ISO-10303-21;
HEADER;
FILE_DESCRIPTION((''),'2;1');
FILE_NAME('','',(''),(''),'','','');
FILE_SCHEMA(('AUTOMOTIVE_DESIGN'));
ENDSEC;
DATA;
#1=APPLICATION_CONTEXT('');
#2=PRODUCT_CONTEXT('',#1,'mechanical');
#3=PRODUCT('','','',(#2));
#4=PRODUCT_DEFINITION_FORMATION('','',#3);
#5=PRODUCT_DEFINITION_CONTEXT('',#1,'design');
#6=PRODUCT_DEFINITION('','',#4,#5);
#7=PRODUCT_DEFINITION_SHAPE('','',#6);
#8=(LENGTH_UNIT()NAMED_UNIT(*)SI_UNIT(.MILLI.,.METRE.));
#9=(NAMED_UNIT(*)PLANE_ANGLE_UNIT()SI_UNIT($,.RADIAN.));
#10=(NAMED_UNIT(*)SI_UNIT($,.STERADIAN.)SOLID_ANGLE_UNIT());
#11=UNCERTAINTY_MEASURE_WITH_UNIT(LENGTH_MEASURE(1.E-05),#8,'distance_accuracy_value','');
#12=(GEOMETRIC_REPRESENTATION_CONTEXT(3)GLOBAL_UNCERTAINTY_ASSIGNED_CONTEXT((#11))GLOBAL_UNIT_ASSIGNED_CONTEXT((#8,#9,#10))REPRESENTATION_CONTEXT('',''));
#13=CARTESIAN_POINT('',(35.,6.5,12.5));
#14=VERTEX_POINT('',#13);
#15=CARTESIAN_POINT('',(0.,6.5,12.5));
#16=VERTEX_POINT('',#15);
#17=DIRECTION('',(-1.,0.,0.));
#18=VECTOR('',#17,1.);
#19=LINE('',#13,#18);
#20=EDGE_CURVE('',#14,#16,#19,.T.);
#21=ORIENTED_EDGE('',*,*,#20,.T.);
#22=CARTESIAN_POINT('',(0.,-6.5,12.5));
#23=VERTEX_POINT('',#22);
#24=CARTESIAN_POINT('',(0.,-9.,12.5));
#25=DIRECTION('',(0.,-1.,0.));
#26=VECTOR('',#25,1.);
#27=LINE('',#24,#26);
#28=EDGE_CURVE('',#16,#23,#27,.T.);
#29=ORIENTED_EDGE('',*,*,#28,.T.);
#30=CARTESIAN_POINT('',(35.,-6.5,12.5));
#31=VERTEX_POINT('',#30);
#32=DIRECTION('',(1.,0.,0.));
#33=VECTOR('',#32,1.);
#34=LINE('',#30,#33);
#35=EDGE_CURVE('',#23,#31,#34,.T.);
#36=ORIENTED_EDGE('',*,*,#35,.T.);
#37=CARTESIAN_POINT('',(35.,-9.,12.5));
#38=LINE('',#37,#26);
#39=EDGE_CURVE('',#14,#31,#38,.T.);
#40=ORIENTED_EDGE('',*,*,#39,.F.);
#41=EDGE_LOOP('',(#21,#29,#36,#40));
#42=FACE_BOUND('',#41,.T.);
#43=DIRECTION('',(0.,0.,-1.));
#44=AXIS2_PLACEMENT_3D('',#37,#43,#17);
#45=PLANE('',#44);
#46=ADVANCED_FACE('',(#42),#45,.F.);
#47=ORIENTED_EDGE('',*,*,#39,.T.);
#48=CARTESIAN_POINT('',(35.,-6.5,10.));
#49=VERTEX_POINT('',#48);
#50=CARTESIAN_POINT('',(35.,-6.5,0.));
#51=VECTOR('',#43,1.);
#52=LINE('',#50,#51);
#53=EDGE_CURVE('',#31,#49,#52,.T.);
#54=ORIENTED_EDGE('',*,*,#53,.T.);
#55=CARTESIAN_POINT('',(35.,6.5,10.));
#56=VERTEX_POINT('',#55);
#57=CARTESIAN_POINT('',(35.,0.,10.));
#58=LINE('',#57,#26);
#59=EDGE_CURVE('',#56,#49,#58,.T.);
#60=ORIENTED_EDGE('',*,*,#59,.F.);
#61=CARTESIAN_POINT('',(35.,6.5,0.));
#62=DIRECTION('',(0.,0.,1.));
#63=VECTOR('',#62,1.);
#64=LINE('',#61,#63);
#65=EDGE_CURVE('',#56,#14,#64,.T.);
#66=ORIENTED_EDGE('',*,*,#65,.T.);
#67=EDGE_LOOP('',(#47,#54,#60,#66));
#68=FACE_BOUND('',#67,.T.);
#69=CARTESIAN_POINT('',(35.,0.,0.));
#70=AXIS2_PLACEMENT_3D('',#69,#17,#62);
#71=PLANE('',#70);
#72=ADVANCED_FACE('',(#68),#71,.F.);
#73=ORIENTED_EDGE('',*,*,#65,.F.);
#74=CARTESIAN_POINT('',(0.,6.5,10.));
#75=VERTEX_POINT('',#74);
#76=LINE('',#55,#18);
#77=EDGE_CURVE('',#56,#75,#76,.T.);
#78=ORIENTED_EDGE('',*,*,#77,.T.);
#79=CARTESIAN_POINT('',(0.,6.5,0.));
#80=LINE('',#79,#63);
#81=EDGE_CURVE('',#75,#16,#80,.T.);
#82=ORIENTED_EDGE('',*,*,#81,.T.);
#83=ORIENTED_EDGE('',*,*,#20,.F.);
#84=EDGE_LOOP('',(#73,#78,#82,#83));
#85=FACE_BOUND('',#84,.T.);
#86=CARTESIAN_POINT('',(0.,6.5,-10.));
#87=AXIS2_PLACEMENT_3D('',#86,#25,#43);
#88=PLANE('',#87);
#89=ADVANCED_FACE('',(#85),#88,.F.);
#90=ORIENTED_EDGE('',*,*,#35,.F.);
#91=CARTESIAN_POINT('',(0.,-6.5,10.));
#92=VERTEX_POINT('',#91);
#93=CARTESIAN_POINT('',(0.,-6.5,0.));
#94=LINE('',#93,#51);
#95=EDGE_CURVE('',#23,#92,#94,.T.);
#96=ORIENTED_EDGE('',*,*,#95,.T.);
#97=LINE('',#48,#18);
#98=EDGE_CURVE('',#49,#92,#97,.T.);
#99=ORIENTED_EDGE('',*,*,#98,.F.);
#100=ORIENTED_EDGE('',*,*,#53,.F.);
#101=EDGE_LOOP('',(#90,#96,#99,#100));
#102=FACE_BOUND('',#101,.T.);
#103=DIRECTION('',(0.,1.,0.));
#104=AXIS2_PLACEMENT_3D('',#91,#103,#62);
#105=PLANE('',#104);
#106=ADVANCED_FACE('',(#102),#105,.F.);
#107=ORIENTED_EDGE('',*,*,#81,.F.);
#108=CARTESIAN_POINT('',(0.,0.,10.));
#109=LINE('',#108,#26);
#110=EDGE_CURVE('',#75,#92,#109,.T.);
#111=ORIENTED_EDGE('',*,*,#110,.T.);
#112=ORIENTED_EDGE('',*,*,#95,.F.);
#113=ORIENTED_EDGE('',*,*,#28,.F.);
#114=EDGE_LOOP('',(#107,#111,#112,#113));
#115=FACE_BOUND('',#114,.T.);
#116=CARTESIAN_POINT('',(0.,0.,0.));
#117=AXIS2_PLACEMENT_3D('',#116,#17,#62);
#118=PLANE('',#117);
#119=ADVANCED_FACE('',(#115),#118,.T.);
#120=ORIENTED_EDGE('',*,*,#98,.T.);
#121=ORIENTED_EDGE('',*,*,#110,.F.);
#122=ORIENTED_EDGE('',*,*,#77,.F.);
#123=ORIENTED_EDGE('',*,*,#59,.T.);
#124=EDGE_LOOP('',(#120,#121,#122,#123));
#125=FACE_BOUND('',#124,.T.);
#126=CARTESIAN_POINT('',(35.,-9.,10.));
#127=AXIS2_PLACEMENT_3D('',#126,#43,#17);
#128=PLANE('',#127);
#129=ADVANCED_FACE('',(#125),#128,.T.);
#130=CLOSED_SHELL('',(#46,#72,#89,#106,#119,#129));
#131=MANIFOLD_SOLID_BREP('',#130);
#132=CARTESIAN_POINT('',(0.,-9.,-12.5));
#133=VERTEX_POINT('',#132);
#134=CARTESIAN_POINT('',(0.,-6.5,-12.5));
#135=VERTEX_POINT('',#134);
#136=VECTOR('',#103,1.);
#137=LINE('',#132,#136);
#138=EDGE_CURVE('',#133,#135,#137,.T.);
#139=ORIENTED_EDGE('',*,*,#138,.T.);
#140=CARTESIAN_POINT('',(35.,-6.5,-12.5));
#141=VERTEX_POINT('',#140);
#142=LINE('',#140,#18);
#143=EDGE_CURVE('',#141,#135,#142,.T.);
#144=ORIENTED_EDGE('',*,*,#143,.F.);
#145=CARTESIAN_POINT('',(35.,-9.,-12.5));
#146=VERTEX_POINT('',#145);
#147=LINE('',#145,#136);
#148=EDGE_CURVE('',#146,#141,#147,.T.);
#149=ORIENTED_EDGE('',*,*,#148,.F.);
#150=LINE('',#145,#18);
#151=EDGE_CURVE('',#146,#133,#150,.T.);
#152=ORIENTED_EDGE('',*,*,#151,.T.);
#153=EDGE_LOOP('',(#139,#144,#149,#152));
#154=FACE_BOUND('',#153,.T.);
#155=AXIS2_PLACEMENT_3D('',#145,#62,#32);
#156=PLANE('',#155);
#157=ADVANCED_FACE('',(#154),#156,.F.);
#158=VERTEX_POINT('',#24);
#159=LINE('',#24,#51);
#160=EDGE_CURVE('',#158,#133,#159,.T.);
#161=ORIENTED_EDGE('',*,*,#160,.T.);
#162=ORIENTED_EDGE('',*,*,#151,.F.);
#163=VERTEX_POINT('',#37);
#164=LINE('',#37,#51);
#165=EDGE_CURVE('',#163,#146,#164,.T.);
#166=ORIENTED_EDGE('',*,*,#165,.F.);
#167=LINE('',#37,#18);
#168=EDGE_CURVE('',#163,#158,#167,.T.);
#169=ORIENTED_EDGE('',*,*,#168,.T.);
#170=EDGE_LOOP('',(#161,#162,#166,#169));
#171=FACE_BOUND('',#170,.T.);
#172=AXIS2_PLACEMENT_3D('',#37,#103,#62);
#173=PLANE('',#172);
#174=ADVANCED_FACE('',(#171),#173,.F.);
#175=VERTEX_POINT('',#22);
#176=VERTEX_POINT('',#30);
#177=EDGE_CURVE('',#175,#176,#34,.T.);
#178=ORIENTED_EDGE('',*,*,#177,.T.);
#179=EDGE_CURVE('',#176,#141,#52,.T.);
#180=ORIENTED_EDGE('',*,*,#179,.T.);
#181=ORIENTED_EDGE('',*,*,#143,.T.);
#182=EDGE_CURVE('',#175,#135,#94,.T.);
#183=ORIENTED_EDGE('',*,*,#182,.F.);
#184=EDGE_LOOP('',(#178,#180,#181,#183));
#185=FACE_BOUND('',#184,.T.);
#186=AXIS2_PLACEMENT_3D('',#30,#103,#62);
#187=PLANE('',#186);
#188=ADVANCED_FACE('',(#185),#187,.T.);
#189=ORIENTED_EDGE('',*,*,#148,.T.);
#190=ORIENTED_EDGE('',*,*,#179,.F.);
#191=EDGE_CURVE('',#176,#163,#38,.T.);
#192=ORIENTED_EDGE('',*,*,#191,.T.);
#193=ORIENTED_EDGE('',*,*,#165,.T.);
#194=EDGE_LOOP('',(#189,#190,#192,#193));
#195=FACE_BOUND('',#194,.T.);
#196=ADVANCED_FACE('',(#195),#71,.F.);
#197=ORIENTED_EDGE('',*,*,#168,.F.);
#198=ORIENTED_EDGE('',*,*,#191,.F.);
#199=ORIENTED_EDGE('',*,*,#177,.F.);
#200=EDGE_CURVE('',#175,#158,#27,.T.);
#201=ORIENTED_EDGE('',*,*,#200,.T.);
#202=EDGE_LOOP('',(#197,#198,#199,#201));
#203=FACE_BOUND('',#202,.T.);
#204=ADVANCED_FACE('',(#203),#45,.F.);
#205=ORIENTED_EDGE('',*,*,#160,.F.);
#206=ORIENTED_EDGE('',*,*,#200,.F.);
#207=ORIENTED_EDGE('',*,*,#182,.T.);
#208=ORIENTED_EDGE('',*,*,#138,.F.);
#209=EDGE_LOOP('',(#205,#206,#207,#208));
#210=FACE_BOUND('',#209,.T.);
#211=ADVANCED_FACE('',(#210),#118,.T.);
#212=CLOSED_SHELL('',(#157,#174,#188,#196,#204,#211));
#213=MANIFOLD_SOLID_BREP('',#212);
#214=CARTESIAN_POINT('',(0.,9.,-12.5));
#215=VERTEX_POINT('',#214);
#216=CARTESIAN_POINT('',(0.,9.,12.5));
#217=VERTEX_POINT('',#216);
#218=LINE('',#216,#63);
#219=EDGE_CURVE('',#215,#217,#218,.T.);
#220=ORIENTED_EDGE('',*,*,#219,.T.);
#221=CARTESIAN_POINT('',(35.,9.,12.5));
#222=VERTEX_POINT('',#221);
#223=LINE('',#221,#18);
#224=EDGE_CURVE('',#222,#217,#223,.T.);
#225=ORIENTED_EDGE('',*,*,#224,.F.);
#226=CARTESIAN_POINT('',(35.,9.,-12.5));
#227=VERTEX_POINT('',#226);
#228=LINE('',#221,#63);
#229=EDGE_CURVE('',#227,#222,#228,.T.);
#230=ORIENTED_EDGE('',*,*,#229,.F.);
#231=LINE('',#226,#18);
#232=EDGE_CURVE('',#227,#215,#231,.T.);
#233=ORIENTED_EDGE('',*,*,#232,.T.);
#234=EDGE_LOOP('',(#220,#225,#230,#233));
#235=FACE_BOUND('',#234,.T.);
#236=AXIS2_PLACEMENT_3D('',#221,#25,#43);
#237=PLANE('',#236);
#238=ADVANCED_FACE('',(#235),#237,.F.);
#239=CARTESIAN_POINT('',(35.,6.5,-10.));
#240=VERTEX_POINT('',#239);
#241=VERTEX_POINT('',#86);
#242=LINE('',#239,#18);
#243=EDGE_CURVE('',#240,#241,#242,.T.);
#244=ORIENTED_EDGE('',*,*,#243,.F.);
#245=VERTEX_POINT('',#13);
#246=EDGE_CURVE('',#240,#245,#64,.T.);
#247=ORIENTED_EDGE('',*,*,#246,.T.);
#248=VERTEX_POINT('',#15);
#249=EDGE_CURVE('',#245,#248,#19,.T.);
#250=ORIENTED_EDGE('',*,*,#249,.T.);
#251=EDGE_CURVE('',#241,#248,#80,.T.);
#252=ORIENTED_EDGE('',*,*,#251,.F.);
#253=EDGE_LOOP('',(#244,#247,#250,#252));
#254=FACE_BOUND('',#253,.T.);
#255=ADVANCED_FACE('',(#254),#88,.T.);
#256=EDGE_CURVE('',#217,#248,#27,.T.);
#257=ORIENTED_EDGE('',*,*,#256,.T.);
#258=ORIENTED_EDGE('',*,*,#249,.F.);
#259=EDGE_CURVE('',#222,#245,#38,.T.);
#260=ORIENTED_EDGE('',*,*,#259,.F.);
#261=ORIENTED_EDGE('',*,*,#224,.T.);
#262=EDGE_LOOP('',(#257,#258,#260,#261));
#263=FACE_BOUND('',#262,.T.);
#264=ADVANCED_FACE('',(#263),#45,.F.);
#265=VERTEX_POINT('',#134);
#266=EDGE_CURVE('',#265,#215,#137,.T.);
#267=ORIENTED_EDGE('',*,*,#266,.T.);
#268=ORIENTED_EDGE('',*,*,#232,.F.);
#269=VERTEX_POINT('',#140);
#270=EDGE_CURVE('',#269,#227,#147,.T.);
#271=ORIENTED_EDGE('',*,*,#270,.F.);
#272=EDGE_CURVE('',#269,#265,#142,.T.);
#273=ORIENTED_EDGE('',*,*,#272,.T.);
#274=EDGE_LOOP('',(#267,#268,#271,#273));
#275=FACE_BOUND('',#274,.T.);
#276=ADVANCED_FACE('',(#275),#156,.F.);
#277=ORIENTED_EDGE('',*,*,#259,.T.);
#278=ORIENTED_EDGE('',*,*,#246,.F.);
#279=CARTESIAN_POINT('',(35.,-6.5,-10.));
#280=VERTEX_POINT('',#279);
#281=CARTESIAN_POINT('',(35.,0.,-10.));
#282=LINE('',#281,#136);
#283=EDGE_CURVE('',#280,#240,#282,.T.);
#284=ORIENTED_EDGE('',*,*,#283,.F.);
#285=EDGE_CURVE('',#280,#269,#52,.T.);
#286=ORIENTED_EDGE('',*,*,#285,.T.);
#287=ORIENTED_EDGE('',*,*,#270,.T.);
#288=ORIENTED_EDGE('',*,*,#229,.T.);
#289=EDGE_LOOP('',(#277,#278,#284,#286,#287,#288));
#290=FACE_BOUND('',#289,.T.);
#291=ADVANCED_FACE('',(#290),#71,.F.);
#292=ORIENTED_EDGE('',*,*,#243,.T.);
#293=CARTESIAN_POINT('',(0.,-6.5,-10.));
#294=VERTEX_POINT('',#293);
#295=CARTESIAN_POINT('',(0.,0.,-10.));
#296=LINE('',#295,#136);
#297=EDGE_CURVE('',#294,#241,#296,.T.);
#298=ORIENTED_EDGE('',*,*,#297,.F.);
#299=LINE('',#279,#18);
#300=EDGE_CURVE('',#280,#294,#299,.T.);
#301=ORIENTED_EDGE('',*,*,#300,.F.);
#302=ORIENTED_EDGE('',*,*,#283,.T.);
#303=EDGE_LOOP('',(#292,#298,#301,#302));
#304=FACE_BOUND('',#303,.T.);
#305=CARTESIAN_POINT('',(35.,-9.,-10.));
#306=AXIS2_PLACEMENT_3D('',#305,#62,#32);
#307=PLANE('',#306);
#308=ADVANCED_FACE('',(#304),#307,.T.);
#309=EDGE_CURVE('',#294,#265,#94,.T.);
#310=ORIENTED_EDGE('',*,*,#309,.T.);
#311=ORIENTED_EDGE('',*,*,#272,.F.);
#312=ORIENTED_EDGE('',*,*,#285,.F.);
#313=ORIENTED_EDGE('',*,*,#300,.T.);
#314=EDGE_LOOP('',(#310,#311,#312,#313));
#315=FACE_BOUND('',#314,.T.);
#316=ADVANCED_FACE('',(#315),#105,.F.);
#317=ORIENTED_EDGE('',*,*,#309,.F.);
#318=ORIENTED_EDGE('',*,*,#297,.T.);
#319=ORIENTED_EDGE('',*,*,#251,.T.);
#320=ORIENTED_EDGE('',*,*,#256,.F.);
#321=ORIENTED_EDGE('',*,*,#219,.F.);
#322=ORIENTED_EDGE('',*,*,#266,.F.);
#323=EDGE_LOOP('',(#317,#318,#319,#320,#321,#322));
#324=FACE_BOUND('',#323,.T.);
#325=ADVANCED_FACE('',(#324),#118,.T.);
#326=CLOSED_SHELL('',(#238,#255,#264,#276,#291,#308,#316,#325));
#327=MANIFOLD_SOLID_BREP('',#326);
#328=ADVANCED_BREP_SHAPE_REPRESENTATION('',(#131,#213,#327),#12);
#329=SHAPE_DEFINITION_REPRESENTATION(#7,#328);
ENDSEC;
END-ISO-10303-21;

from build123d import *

# Parameters (mm, degrees)
SKETCH1_W           = 25
SKETCH1_H           = 18
BOSS_EXTRUDE1_DEPTH = 35
SHELL1_T            = -2.5
SPLIT1_START        = -9
SPLIT1_OUTLINE_W    = 35
SPLIT1_OUTLINE_H    = 25
SPLIT1_DEPTH        = 2.5
SPLIT1_START_2      = -6.5
SPLIT1_2_OUTLINE_W  = 35
SPLIT1_2_OUTLINE_H  = 2.5
SPLIT1_2_DEPTH      = 13
SPLIT1_3_OUTLINE_W  = 35
SPLIT1_3_OUTLINE_H  = 2.5
SPLIT1_3_DEPTH      = 13
SPLIT1_4_OUTLINE_W  = 35
SPLIT1_4_OUTLINE_H  = 25
SPLIT1_4_DEPTH      = 2.5


# Read off the part's stored shape, not the designer's step: Split1
with BuildPart() as part:
    # Sketch1 → Boss-Extrude1 (new body)
    with BuildSketch(Plane(origin=(0, 0, 0), x_dir=(0, 0, -1), z_dir=(1, 0, 0))):
        Rectangle(SKETCH1_W, SKETCH1_H)
    extrude(amount=BOSS_EXTRUDE1_DEPTH)

    # Shell1
    shell1_openings = [part.faces().sort_by_distance(p)[0] for p in [
        (35, 0, 0),
        (0, 0, 0),
    ]]
    offset(amount=SHELL1_T, openings=shell1_openings, kind=Kind.INTERSECTION)

    # Split1 outline → Split1 (cut)
    with BuildSketch(Plane(origin=(0, 0, 0), x_dir=(1, 0, 0), z_dir=(0, 1, 0)).offset(SPLIT1_START)):
        with Locations((17.5, 0)):
            Rectangle(SPLIT1_OUTLINE_W, SPLIT1_OUTLINE_H)
    extrude(amount=SPLIT1_DEPTH, mode=Mode.SUBTRACT)

    # Split1 2 outline → Split1 2 (cut)
    with BuildSketch(Plane(origin=(0, 0, 0), x_dir=(1, 0, 0), z_dir=(0, 1, 0)).offset(SPLIT1_START_2)):
        with Locations((17.5, -11.25)):
            Rectangle(SPLIT1_2_OUTLINE_W, SPLIT1_2_OUTLINE_H)
    extrude(amount=SPLIT1_2_DEPTH, mode=Mode.SUBTRACT)


with BuildPart() as body_2:
    # Split1 3 outline → Split1 3 (new body)
    with BuildSketch(Plane(origin=(0, 0, 0), x_dir=(1, 0, 0), z_dir=(0, 1, 0)).offset(SPLIT1_START_2)):
        with Locations((17.5, -11.25)):
            Rectangle(SPLIT1_3_OUTLINE_W, SPLIT1_3_OUTLINE_H)
    extrude(amount=SPLIT1_3_DEPTH)


with BuildPart() as body_3:
    # Split1 4 outline → Split1 4 (new body)
    with BuildSketch(Plane(origin=(0, 0, 0), x_dir=(1, 0, 0), z_dir=(0, 1, 0)).offset(SPLIT1_START)):
        with Locations((17.5, 0)):
            Rectangle(SPLIT1_4_OUTLINE_W, SPLIT1_4_OUTLINE_H)
    extrude(amount=SPLIT1_4_DEPTH)


solid = Compound([part.part, body_2.part, body_3.part])
